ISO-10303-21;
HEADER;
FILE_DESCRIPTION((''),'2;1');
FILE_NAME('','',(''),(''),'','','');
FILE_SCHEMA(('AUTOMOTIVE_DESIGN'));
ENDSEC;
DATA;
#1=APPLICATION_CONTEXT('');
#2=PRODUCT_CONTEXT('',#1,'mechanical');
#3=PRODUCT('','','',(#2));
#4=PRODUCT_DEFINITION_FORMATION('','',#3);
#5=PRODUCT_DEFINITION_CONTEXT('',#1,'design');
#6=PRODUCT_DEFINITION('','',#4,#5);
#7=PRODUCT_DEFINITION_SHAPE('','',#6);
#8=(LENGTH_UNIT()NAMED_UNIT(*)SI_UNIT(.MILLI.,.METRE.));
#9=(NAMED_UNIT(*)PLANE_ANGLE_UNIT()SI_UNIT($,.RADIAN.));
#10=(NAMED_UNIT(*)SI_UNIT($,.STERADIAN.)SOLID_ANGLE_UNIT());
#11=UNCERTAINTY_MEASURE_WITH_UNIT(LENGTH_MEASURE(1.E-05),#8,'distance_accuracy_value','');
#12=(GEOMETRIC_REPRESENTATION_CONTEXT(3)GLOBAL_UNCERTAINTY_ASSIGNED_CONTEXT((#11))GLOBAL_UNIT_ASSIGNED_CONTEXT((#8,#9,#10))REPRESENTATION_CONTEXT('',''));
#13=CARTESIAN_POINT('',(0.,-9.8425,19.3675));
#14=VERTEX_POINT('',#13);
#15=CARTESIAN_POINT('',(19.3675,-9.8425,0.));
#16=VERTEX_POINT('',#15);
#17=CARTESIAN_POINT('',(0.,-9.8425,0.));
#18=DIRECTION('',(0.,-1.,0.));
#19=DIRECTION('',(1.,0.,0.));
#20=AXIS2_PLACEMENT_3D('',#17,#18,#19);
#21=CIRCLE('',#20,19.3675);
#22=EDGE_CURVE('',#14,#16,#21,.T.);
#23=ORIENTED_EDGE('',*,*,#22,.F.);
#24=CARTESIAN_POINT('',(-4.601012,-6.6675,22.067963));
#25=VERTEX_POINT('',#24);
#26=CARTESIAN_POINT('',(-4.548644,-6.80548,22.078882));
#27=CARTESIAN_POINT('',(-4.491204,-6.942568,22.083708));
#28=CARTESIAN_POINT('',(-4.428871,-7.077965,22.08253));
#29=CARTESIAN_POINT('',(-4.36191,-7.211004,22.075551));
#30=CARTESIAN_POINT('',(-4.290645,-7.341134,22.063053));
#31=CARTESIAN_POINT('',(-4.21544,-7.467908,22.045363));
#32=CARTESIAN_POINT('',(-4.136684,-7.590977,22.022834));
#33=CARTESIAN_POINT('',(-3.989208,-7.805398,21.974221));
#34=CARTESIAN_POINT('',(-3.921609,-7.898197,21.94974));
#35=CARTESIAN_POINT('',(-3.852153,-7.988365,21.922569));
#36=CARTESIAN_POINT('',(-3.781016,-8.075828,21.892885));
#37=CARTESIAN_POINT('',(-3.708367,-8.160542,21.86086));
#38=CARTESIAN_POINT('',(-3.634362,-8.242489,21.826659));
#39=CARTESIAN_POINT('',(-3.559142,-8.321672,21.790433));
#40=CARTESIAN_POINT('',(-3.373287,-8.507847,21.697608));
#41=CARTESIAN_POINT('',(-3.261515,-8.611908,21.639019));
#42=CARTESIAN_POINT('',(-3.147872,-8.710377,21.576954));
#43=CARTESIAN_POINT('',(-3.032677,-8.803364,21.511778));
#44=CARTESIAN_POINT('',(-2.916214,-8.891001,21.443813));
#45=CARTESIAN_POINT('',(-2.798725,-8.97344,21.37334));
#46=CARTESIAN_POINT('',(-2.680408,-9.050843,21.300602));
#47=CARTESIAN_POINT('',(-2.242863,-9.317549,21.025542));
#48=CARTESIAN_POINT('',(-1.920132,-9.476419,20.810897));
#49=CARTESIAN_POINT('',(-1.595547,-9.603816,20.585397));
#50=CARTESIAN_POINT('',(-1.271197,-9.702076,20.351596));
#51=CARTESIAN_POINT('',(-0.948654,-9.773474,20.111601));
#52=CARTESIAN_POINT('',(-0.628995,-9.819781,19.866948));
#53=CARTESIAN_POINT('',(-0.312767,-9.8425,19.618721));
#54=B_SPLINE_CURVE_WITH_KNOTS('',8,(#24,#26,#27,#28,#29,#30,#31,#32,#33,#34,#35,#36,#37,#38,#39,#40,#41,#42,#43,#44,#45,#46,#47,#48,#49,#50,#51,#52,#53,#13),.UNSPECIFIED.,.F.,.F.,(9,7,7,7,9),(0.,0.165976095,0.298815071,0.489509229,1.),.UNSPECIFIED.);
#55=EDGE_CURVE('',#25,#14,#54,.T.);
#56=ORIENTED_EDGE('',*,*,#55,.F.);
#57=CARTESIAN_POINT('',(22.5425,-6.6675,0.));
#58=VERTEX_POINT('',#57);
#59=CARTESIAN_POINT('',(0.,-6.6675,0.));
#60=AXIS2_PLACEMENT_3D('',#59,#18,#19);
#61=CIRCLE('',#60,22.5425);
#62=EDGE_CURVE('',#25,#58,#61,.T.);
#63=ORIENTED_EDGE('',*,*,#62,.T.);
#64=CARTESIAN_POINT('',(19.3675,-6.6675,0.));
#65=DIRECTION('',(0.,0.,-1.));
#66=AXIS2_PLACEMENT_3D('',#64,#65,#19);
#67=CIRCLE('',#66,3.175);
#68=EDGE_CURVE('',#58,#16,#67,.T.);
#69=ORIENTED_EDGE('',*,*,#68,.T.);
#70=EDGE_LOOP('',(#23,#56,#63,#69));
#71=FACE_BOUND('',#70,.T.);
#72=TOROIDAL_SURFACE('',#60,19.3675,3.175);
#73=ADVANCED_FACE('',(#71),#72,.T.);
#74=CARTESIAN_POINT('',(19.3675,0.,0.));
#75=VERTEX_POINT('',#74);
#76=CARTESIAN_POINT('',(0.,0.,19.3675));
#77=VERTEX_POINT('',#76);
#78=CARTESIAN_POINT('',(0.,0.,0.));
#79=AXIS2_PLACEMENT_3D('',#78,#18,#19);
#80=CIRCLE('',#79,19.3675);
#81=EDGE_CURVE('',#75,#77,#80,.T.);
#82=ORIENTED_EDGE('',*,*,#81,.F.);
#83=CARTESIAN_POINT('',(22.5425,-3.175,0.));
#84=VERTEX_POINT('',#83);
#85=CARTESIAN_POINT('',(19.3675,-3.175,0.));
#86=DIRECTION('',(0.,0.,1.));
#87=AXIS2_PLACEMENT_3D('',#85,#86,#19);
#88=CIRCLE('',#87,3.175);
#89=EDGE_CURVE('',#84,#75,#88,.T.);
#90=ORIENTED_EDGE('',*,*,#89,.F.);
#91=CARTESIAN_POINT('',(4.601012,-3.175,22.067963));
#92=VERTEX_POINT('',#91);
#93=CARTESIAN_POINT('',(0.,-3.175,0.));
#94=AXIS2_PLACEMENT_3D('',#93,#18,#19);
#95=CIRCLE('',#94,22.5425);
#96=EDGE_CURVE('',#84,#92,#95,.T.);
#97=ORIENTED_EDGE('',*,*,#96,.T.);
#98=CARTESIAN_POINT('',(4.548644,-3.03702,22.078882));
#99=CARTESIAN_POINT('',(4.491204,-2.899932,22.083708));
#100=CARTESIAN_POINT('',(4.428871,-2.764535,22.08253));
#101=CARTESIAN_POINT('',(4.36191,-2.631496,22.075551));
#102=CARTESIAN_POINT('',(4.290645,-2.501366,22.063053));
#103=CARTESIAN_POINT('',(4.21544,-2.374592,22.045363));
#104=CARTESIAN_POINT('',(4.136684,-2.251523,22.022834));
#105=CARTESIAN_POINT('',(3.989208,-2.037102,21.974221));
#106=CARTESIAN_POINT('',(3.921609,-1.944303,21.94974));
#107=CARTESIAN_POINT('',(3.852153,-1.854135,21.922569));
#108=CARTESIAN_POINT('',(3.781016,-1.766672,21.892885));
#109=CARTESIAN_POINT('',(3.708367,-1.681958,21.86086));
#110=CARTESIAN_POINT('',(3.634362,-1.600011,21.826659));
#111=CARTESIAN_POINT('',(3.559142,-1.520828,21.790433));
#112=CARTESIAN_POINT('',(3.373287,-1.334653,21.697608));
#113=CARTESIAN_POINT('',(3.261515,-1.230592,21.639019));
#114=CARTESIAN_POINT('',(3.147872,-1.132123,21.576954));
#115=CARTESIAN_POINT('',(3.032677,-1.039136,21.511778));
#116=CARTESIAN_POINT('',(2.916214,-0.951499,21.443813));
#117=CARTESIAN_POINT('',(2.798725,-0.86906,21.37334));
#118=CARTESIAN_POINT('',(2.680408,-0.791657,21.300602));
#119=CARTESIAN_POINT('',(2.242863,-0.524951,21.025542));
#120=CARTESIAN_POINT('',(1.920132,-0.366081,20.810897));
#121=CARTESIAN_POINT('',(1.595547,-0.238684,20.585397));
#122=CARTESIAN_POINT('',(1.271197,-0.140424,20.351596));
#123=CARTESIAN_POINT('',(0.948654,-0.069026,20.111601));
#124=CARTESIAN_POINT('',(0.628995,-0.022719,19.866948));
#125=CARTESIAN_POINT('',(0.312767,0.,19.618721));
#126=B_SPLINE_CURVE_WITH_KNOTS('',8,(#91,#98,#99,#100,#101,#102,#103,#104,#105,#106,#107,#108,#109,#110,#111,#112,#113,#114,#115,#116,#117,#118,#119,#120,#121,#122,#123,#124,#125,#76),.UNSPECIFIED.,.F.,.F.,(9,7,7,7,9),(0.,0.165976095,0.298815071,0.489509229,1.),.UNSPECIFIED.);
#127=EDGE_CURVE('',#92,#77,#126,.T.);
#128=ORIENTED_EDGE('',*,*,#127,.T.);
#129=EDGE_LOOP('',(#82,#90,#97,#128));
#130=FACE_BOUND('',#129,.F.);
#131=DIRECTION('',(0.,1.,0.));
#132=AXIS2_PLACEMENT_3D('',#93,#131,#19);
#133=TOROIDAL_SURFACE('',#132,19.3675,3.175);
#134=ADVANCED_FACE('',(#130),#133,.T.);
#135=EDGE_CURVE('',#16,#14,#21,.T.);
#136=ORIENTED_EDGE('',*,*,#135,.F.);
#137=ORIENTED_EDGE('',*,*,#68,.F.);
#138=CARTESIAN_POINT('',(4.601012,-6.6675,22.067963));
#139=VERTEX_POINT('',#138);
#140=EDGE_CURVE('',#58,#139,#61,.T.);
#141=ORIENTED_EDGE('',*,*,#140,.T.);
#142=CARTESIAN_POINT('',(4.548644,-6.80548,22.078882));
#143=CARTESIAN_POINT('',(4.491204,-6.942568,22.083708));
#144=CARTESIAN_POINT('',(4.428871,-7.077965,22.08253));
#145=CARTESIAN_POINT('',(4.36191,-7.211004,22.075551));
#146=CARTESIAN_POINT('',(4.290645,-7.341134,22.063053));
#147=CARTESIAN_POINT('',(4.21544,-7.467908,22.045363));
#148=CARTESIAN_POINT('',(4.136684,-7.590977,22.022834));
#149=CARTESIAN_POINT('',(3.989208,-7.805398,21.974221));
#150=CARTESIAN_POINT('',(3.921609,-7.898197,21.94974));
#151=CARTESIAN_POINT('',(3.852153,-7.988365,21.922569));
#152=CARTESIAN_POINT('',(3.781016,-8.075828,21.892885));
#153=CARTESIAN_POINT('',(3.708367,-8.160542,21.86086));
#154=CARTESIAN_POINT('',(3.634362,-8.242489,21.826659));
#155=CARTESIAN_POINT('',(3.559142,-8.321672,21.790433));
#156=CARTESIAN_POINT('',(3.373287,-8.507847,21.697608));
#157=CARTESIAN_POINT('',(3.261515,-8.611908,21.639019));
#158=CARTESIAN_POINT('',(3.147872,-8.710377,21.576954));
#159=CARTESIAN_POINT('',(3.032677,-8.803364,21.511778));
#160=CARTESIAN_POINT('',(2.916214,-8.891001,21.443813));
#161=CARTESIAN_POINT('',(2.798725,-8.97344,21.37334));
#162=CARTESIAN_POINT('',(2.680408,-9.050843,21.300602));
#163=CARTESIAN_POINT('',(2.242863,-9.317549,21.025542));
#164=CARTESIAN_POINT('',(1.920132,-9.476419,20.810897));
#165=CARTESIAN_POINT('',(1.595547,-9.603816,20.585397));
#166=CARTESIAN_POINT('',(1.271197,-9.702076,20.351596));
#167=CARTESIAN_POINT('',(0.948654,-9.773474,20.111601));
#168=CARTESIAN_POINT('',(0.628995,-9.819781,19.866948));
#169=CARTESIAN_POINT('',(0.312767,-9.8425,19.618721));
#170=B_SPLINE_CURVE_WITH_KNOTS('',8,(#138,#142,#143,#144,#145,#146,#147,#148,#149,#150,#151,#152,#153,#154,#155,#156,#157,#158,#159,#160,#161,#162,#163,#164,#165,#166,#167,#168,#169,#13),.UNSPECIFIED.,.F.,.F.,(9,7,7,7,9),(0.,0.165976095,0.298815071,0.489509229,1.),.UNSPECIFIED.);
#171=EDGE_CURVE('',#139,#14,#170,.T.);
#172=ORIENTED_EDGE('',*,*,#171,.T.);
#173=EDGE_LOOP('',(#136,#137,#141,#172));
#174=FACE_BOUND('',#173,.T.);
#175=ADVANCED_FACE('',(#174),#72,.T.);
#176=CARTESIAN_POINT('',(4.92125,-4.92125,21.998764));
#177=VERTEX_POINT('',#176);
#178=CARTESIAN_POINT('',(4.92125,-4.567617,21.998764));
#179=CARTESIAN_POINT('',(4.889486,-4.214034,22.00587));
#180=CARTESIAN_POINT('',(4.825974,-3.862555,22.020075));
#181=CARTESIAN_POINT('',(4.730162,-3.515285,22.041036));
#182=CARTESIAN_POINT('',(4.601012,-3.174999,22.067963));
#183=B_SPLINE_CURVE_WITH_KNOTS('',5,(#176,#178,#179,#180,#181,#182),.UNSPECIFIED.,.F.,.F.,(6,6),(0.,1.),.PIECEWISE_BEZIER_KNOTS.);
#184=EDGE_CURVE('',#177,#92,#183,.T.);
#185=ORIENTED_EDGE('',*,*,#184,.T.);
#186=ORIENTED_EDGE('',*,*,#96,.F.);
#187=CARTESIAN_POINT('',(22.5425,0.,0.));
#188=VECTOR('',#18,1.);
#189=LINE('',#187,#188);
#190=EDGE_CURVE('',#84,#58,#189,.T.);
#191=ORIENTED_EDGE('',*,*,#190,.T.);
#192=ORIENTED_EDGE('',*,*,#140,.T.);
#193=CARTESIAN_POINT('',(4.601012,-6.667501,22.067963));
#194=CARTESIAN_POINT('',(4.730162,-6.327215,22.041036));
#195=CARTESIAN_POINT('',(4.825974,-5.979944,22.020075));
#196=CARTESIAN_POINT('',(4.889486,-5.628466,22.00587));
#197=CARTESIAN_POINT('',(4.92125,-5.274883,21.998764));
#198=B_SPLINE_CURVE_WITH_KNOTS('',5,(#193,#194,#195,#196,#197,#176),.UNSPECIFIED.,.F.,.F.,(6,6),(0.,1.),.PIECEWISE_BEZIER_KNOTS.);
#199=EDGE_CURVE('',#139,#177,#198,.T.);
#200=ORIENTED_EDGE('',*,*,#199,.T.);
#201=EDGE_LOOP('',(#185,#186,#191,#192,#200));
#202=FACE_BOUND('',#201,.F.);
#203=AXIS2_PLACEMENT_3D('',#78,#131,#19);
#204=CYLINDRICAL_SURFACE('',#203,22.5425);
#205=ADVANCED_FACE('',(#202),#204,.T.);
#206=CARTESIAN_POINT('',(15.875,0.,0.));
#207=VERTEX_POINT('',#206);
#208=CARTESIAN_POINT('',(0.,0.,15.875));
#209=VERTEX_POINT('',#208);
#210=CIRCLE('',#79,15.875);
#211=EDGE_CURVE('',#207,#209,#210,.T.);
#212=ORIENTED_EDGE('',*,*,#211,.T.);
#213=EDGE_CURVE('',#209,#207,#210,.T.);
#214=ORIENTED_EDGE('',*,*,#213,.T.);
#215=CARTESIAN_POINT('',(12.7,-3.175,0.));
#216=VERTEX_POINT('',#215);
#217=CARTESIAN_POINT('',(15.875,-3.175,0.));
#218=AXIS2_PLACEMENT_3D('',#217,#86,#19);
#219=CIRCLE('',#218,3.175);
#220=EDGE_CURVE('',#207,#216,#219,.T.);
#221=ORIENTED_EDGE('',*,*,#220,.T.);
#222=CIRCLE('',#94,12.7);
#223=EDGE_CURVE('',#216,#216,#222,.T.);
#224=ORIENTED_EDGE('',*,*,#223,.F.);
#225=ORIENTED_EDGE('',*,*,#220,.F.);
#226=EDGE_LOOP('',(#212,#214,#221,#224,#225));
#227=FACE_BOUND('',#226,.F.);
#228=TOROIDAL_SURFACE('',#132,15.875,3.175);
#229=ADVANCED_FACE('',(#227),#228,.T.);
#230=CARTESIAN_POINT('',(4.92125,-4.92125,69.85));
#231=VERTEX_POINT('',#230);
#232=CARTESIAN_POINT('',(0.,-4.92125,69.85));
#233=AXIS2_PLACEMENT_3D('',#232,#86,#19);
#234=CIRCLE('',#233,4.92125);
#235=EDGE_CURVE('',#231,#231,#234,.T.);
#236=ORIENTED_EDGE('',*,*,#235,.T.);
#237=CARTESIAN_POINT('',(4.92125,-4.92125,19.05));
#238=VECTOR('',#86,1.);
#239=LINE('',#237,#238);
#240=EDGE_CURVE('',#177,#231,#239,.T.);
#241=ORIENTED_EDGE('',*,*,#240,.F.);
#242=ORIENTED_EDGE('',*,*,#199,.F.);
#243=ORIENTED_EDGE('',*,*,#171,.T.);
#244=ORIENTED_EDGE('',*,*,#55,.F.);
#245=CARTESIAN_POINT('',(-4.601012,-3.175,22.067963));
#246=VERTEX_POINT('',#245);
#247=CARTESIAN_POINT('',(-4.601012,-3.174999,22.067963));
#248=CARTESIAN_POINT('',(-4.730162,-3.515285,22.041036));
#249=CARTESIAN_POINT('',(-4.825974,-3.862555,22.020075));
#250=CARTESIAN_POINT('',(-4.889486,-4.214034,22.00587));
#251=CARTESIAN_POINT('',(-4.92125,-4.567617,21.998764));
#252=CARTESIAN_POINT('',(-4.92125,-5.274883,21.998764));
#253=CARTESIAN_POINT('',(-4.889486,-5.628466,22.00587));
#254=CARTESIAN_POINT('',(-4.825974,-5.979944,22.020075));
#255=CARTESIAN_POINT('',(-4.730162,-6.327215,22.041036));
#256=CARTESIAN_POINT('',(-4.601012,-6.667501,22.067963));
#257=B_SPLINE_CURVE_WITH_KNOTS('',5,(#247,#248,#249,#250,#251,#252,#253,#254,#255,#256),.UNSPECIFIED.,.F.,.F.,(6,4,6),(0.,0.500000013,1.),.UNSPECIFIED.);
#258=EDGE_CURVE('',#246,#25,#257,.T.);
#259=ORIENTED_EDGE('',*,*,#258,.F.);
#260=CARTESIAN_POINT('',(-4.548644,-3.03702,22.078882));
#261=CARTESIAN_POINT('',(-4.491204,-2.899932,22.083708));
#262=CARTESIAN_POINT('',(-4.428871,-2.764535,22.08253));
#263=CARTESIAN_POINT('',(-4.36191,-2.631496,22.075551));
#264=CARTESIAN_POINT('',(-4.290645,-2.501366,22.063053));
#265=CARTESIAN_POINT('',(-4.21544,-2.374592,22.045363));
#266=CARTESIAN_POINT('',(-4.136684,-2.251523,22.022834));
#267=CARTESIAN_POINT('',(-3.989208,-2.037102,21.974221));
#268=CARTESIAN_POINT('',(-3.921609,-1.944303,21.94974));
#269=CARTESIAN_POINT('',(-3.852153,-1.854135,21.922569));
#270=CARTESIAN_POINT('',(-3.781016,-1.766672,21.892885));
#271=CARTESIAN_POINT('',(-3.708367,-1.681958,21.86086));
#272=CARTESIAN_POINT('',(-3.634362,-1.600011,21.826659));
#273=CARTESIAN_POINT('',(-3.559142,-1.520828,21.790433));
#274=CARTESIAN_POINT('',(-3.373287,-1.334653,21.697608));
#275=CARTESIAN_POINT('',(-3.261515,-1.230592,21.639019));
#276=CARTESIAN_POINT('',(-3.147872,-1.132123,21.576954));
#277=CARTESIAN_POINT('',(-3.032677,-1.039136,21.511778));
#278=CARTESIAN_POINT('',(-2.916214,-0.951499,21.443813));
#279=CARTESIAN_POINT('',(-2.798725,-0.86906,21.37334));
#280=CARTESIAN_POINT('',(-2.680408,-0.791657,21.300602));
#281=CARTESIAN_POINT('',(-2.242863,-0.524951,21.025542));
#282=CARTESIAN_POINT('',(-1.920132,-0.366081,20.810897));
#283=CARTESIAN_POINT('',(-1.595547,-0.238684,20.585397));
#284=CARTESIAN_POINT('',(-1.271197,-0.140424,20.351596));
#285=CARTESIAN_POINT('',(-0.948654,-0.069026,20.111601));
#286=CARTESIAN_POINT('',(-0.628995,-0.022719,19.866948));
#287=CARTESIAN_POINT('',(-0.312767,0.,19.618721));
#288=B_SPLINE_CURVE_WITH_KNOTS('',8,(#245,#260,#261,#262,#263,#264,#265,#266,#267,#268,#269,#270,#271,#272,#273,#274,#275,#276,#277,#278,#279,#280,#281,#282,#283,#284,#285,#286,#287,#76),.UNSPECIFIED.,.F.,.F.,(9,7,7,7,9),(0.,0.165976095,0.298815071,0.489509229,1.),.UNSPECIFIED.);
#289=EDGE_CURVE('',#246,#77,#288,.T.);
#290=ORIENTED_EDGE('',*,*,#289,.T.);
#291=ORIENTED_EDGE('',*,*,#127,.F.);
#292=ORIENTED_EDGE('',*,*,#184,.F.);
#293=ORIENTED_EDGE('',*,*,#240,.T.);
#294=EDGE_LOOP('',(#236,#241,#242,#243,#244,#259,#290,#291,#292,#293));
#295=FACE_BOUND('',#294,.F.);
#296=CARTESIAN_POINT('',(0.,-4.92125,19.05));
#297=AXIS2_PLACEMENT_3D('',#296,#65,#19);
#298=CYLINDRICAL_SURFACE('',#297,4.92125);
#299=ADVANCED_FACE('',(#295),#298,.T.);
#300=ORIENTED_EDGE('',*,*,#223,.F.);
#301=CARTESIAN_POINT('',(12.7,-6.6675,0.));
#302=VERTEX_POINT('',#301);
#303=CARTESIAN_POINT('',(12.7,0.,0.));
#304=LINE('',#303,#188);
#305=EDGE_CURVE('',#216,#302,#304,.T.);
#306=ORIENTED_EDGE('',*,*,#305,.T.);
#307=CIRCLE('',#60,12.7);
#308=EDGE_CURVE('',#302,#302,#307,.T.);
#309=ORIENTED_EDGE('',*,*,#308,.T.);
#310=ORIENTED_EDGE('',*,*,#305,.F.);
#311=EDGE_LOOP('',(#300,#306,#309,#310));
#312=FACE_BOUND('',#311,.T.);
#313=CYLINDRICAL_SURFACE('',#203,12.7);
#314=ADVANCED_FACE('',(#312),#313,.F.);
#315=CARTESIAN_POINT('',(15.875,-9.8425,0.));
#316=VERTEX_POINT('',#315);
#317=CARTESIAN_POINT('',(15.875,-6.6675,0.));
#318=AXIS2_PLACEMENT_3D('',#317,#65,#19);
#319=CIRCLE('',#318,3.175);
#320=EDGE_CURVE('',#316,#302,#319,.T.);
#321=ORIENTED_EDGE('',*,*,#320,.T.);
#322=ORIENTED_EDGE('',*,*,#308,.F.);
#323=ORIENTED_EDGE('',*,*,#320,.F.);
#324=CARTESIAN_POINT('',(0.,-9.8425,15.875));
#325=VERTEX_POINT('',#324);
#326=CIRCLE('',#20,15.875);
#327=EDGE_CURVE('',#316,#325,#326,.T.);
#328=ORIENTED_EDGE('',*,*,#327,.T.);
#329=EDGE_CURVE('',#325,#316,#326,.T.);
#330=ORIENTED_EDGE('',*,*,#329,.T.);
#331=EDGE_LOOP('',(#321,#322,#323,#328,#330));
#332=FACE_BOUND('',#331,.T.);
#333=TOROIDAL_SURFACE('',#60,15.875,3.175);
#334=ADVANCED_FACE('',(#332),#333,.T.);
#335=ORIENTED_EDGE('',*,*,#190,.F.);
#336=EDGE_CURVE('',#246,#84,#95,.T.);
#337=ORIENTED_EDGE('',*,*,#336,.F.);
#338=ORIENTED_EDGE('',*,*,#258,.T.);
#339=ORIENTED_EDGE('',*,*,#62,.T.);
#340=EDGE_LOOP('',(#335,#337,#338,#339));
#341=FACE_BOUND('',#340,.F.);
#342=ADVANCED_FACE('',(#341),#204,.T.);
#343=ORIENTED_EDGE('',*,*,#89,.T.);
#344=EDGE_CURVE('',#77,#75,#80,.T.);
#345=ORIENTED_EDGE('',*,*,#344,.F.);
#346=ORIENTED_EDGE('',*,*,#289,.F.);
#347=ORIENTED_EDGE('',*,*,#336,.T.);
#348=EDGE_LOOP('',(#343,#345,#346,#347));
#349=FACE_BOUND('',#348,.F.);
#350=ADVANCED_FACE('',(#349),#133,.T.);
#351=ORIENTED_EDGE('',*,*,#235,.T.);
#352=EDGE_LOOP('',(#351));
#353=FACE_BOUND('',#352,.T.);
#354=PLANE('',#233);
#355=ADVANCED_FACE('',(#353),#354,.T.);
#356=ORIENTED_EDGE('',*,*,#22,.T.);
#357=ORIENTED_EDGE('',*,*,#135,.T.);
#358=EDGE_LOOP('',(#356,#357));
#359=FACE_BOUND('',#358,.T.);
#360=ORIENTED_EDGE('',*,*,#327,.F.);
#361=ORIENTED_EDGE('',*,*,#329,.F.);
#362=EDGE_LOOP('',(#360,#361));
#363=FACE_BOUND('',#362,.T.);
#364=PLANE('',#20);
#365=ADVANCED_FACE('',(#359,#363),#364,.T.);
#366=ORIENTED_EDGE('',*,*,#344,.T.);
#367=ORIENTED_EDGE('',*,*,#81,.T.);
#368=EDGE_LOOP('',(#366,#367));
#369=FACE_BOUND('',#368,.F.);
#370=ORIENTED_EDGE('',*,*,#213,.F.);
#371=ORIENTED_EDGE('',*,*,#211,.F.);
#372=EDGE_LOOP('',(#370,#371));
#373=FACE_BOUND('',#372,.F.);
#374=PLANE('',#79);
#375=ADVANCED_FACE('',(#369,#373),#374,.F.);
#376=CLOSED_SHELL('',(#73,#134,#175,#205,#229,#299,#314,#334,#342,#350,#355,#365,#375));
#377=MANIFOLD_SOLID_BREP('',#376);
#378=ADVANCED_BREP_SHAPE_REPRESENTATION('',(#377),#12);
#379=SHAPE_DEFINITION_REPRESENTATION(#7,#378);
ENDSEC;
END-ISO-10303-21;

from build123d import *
from build123d import SkipClean  # not in build123d's __all__

# Parameters (mm, degrees)
F0_R          = 22.5425
F0_R_2        = 12.7
F1_DEPTH      = 9.8425
F2_R          = 3.175
F3_R          = 3.175
F5_R          = 4.92125
F6_DEPTH      = 50.8
F6_DEPTH_BACK = 3.175


with BuildPart() as f1:
    # F0 (on Front) → F1 (new body)
    with BuildSketch(Plane.XZ):
        Circle(F0_R)
        Circle(F0_R_2, mode=Mode.SUBTRACT)
    extrude(amount=F1_DEPTH)

    # F2
    f2_edges = [f1.edges().sort_by_distance(p)[0] for p in [
        (-22.5425, -9.8425, 0),
        (-22.5425, 0, 0),
    ]]
    fillet(f2_edges, radius=F2_R)

    # F3
    f3_edges = [f1.edges().sort_by_distance(p)[0] for p in [
        (-12.7, -9.8425, 0),
        (-12.7, 0, 0),
    ]]
    fillet(f3_edges, radius=F3_R)

    # F5 (on offset) → F6 (join, two sides)
    with BuildSketch(Plane.XY.offset(19.05)) as f6_sk:
        with Locations((0, -4.92125)):
            Circle(F5_R)
    with SkipClean():  # cleaning this boolean's faces spoils the solid; the shape is the same uncleaned
        extrude(amount=F6_DEPTH)
        extrude(f6_sk.sketch, amount=-F6_DEPTH_BACK)


solid = f1.part
